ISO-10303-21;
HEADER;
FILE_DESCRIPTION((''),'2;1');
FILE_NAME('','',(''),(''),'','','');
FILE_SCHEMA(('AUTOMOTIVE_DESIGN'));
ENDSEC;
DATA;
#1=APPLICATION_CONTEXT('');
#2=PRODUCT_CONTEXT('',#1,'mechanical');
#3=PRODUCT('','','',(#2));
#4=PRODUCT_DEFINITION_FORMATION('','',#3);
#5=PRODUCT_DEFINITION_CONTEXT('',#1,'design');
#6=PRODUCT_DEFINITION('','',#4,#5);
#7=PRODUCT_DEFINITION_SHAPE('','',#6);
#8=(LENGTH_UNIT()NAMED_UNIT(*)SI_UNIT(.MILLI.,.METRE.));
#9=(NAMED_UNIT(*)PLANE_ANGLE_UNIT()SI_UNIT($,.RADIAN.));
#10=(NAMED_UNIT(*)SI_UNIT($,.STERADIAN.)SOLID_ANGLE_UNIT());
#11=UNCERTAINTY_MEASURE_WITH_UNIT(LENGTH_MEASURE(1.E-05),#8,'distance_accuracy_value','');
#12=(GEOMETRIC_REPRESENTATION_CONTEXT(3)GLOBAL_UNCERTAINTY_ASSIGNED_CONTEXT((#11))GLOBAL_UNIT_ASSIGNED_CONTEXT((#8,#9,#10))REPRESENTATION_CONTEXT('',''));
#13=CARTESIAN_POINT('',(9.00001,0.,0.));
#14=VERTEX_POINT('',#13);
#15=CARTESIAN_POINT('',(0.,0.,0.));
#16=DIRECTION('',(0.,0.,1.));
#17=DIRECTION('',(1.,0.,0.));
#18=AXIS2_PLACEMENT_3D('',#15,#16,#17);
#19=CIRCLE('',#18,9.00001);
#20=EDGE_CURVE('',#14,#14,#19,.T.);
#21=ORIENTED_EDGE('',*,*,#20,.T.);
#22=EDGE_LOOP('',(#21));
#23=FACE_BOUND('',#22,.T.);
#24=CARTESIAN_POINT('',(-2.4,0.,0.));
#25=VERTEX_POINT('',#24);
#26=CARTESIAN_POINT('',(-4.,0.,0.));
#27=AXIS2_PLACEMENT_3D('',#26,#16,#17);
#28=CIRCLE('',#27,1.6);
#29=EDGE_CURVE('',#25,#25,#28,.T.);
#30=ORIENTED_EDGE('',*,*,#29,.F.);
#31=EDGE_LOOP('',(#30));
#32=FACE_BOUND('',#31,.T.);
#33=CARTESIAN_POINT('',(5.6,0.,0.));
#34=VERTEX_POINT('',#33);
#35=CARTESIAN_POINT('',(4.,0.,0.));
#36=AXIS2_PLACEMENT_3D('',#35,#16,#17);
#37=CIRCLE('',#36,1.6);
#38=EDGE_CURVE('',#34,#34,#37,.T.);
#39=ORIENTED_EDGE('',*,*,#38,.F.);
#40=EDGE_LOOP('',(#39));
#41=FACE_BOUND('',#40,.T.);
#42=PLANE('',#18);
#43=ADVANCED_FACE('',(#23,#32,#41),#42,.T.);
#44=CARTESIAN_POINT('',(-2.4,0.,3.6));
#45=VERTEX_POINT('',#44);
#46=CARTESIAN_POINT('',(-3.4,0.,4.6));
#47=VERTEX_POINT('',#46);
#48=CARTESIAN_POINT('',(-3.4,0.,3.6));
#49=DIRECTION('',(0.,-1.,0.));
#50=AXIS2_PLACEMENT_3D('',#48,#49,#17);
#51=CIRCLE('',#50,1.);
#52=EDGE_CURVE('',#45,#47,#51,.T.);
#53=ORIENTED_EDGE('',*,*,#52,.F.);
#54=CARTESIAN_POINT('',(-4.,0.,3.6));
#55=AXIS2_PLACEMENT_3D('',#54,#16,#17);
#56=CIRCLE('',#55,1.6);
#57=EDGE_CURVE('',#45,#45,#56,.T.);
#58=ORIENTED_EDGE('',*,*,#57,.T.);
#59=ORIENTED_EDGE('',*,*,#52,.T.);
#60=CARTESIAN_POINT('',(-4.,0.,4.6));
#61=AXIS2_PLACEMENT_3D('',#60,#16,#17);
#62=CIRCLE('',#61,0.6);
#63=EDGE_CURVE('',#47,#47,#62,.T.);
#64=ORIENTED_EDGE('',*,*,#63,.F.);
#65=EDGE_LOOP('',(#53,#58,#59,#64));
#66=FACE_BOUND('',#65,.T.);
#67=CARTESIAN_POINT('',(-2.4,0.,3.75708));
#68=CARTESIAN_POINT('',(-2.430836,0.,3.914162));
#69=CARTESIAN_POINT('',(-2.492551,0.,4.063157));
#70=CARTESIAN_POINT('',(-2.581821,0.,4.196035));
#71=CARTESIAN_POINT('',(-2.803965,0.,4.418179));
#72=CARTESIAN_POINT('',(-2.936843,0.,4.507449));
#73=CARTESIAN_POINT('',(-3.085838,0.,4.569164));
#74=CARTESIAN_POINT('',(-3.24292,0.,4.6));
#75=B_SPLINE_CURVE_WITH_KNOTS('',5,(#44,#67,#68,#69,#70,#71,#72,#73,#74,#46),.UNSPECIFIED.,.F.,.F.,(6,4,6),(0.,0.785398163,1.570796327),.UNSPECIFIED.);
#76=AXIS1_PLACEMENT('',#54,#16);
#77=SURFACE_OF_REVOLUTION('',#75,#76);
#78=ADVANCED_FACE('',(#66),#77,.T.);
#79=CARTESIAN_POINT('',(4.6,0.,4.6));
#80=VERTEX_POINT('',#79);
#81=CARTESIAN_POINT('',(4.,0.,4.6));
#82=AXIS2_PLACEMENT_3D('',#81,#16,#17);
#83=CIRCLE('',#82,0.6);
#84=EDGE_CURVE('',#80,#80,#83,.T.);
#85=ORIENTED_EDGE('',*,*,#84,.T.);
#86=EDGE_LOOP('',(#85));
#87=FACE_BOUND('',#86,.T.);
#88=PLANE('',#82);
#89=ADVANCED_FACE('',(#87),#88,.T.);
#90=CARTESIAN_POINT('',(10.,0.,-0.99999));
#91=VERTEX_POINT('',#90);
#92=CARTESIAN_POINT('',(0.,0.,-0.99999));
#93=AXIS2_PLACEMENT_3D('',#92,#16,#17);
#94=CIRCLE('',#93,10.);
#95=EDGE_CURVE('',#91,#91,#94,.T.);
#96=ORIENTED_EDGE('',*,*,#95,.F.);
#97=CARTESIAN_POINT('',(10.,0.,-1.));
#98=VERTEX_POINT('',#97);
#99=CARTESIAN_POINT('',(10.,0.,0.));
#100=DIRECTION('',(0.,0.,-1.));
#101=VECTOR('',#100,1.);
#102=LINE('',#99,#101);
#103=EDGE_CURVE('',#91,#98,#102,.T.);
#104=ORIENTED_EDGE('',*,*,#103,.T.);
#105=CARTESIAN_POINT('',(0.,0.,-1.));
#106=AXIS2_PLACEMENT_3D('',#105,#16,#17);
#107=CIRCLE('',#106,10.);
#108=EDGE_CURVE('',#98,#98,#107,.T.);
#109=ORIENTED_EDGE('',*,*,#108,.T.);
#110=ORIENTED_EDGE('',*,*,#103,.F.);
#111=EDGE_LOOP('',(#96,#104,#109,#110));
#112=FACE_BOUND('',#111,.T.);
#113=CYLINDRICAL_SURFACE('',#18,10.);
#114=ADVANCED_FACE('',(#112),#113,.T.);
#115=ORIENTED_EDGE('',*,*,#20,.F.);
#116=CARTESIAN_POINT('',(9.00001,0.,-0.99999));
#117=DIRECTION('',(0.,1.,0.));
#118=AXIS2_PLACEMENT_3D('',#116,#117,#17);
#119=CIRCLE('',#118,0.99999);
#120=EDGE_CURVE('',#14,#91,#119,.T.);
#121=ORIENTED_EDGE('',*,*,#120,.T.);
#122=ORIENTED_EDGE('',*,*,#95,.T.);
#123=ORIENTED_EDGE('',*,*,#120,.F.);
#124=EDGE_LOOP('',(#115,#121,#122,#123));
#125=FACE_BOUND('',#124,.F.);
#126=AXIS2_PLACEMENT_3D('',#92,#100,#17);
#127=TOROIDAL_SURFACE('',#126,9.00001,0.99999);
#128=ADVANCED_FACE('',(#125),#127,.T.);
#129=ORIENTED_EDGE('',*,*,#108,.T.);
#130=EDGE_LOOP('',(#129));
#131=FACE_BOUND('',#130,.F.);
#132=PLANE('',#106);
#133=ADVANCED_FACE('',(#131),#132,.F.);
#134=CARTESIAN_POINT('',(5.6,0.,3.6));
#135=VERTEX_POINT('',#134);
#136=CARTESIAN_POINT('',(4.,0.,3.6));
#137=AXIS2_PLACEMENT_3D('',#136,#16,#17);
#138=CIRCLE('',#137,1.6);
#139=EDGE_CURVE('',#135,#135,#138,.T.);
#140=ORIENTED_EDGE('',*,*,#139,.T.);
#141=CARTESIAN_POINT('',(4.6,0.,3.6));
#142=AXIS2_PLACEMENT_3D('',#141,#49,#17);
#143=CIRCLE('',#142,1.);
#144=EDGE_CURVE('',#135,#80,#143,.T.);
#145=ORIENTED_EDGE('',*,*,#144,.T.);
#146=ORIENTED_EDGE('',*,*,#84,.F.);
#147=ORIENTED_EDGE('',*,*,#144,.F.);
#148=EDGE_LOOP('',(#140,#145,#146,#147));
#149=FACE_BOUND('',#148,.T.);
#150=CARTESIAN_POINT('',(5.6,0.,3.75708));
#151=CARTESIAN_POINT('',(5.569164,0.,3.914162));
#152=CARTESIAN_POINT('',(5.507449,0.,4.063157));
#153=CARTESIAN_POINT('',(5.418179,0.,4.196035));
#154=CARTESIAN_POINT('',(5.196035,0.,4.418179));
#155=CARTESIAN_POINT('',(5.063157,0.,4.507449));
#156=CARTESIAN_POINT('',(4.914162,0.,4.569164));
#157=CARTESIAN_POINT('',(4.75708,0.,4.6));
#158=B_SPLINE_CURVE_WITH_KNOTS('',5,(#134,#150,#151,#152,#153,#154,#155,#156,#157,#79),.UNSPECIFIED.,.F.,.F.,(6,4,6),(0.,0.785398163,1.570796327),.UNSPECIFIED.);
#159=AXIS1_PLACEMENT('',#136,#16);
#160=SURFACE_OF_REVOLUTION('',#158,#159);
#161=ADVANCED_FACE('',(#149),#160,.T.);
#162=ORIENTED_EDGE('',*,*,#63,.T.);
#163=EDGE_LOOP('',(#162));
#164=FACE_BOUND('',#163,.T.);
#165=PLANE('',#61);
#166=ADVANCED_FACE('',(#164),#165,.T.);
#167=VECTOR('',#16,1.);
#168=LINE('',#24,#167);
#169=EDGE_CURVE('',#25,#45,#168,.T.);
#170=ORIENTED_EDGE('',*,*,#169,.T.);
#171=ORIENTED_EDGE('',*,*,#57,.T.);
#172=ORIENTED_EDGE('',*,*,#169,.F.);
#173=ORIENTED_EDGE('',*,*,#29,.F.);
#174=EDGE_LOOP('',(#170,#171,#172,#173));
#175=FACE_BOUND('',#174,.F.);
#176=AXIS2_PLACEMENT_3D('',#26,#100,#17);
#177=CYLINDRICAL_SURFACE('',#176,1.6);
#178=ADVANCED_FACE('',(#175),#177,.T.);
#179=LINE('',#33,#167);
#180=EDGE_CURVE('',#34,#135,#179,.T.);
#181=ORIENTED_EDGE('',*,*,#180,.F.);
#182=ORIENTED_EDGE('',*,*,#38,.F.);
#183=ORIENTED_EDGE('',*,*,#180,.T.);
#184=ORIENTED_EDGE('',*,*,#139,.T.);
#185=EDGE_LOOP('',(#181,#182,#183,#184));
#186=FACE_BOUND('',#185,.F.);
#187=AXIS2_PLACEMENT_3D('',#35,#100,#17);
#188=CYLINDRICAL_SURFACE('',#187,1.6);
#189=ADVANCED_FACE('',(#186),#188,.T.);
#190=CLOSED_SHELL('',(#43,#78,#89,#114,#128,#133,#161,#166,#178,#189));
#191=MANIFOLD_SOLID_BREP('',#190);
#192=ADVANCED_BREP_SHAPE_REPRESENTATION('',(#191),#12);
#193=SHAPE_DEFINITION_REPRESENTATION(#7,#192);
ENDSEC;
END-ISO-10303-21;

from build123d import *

# Parameters (mm, degrees)
F0_R     = 10
F0_R_2   = 1.6
F1_DEPTH = 1
F2_DEPTH = 4.6
F3_R     = 1
F4_R     = 0.99999


# Not quite as in the source:
# - a fillet or chamfer is up to 0.001 mm smaller than in the source, because OpenCascade refuses the exact size


with BuildPart() as f1:
    # F0 (on Top) → F1 (new body)
    with BuildSketch(Plane.XY):
        Circle(F0_R)
        with Locations((-4, 0)):
            Circle(F0_R_2, mode=Mode.SUBTRACT)
        with Locations((4, 0)):
            Circle(F0_R_2, mode=Mode.SUBTRACT)
        with Locations((-4, 0)):
            Circle(F0_R_2)
        with Locations((4, 0)):
            Circle(F0_R_2)
    extrude(amount=-F1_DEPTH)

    # F0 (on Top) → F2 (join)
    with BuildSketch(Plane.XY):
        with Locations((-4, 0)):
            Circle(F0_R_2)
        with Locations((4, 0)):
            Circle(F0_R_2)
    extrude(amount=F2_DEPTH)

    # F3
    f3_edges = [f1.edges().sort_by_distance(p)[0] for p in [
        (-5.6, 0, 4.6),
        (2.4, 0, 4.6),
    ]]
    fillet(f3_edges, radius=F3_R)

    # F4 (radius 1 in the source; OpenCascade refuses exactly that, so slightly less here)
    f4_edges = [f1.edges().sort_by_distance(p)[0] for p in [
        (-10, 0, 0),
    ]]
    fillet(f4_edges, radius=F4_R)


solid = f1.part
